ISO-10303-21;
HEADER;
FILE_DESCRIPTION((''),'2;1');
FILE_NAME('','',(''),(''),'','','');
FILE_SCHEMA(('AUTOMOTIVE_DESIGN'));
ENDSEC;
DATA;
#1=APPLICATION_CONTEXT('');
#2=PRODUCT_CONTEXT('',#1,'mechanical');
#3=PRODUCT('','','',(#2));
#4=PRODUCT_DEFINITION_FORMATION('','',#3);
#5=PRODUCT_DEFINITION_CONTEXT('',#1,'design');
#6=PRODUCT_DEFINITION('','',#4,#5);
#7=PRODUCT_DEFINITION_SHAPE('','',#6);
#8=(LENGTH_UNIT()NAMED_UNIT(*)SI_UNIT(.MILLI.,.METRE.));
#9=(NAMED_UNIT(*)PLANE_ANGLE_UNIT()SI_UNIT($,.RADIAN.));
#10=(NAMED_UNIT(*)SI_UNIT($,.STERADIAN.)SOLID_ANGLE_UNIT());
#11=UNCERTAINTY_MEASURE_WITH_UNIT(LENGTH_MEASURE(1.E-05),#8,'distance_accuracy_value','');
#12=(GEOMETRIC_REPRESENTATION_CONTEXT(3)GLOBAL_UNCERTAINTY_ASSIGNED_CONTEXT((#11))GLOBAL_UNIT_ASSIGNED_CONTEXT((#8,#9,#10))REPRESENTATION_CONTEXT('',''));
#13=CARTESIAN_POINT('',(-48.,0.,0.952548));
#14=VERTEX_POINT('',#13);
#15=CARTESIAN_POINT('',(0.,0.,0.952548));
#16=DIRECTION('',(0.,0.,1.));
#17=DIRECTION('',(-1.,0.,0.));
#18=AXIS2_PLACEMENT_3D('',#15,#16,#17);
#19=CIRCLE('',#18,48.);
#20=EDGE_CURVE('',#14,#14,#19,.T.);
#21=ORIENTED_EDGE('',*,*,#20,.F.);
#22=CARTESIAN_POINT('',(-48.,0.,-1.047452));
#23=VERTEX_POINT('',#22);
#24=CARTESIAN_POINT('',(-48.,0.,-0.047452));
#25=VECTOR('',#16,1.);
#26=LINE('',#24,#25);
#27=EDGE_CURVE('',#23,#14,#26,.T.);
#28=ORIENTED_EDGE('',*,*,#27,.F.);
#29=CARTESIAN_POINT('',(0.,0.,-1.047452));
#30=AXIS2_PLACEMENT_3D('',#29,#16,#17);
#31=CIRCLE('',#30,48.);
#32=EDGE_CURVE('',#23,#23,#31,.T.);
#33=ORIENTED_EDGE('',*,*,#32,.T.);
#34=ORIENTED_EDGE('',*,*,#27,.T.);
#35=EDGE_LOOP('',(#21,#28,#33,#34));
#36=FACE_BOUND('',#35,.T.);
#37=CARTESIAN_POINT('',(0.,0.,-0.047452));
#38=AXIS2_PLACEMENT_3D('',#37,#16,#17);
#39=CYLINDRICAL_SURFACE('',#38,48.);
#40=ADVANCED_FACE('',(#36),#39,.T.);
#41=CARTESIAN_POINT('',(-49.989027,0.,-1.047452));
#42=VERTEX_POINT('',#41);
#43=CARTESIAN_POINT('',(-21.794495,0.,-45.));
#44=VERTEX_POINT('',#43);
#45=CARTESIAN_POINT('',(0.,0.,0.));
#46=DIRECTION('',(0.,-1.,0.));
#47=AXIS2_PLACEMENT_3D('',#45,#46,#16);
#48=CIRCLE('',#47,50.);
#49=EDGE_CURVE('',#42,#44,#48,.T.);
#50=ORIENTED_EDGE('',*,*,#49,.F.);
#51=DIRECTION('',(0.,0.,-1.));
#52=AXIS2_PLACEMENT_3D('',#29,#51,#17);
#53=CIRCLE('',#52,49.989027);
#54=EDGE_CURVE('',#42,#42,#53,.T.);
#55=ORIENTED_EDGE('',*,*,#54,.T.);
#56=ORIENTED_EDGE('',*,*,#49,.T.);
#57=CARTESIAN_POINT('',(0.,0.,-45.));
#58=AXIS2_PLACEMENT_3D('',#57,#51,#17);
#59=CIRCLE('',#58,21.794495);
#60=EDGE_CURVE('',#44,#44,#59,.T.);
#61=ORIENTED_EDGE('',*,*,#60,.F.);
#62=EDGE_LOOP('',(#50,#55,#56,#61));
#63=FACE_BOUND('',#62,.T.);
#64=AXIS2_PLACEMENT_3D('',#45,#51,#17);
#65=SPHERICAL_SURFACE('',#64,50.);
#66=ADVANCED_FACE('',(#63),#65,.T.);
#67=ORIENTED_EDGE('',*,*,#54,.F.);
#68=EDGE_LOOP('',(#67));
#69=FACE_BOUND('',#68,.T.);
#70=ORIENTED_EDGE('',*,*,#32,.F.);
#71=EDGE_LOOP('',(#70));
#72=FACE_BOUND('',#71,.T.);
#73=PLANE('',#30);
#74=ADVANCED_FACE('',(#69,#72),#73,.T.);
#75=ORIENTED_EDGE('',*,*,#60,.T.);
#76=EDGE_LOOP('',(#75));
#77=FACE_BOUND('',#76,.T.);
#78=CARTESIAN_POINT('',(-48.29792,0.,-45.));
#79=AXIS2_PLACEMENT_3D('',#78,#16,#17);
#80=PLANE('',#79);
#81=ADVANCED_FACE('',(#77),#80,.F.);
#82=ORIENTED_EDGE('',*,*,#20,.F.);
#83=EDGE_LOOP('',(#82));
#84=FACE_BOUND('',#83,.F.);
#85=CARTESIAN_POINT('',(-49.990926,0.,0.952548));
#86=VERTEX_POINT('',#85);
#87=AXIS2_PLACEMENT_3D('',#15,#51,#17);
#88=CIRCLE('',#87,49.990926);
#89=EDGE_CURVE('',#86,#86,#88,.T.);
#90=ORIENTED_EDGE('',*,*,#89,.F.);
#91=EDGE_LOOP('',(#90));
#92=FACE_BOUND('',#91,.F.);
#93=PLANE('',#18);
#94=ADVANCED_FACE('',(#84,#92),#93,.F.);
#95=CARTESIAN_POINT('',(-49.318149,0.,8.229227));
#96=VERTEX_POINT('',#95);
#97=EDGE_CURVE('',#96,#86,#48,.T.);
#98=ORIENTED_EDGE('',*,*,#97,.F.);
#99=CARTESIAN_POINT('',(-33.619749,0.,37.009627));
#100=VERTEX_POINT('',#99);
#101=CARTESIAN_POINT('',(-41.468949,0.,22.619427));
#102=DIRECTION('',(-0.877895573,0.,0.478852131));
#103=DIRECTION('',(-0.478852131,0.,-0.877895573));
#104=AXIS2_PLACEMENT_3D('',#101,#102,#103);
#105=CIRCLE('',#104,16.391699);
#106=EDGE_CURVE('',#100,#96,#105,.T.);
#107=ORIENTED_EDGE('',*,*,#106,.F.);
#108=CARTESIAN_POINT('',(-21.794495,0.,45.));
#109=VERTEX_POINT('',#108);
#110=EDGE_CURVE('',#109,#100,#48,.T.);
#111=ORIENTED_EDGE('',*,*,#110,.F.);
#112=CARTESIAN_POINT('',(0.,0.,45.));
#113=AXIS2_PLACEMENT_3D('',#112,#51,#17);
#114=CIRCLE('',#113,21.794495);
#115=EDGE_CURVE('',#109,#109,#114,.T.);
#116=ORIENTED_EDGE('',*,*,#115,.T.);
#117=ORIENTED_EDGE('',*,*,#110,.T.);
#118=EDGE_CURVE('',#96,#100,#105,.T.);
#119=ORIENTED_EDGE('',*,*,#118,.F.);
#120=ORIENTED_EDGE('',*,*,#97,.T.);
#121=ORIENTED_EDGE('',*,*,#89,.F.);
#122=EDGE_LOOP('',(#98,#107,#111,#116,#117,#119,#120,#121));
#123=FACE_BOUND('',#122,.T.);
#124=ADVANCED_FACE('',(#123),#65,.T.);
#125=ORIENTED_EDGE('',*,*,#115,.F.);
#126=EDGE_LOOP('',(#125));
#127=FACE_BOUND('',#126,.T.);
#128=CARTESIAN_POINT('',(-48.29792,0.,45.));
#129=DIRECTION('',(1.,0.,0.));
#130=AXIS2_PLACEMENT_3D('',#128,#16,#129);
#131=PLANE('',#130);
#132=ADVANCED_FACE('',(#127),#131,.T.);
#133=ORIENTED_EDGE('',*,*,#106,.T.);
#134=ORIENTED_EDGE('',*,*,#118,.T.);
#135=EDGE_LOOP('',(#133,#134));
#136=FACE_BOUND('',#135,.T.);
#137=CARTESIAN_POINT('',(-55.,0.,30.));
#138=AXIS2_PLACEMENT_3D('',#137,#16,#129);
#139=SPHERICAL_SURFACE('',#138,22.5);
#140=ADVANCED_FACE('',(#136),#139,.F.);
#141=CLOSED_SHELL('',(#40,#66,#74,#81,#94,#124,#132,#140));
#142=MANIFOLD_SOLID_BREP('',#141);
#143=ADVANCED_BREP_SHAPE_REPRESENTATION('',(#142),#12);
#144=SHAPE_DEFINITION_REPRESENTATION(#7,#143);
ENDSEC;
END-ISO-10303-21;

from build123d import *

# Parameters (mm, degrees)
F4_W          = 98.152165938
F4_H          = 19.5652123008
F5_DEPTH      = 25
F5_DEPTH_BACK = 25
F6_W          = 12.6501991157
F6_H          = 2


# Not quite as in the source:
# - a pattern or mirror of a feature is missing from the dataset's text; its kind, count and spacing are read off the source's solid


with BuildPart() as f1:
    # F0 (on Front) → F1 (revolve)
    with BuildSketch(Plane.XZ):
        with BuildLine():
            Line((0, -50), (0, 50))
            ThreePointArc((0, 50), (-50, 0), (0, -50))
        make_face()
    revolve(axis=Axis((0, 0, 0), (0, 0, -1)))

    # F2 (on Front) → F3 (revolve, cut)
    with BuildSketch(Plane.XZ):
        with BuildLine():
            Line((-55, 52.5), (-55, 7.5))
            ThreePointArc((-55, 7.5), (-32.5, 30), (-55, 52.5))
        make_face()
    revolve(axis=Axis((-55, 0, 30), (0, 0, -1)), mode=Mode.SUBTRACT)

    # F4 (on Front) → F5 (cut, two sides)
    with BuildSketch(Plane.XZ) as f5_sk:
        with Locations((0.7781628519, 54.7826061504)):
            Rectangle(F4_W, F4_H)
    f5 = extrude(amount=-F5_DEPTH, mode=Mode.SUBTRACT) + extrude(f5_sk.sketch, amount=F5_DEPTH_BACK, mode=Mode.SUBTRACT)

    # F5_copies: F5 across plane
    add(f5.mirror(Plane(origin=(0, 0, 0), x_dir=(-1, 0, 0), z_dir=(0, 0, -1))), mode=Mode.SUBTRACT)

    # F6 (on Front) → F7 (revolve, cut)
    with BuildSketch(Plane.XZ):
        with Locations((-54.3250995579, -0.0474521765)):
            Rectangle(F6_W, F6_H)
    revolve(axis=Axis((0, 0, 21.1794096977), (0, 0, 1)), mode=Mode.SUBTRACT)


solid = f1.part
